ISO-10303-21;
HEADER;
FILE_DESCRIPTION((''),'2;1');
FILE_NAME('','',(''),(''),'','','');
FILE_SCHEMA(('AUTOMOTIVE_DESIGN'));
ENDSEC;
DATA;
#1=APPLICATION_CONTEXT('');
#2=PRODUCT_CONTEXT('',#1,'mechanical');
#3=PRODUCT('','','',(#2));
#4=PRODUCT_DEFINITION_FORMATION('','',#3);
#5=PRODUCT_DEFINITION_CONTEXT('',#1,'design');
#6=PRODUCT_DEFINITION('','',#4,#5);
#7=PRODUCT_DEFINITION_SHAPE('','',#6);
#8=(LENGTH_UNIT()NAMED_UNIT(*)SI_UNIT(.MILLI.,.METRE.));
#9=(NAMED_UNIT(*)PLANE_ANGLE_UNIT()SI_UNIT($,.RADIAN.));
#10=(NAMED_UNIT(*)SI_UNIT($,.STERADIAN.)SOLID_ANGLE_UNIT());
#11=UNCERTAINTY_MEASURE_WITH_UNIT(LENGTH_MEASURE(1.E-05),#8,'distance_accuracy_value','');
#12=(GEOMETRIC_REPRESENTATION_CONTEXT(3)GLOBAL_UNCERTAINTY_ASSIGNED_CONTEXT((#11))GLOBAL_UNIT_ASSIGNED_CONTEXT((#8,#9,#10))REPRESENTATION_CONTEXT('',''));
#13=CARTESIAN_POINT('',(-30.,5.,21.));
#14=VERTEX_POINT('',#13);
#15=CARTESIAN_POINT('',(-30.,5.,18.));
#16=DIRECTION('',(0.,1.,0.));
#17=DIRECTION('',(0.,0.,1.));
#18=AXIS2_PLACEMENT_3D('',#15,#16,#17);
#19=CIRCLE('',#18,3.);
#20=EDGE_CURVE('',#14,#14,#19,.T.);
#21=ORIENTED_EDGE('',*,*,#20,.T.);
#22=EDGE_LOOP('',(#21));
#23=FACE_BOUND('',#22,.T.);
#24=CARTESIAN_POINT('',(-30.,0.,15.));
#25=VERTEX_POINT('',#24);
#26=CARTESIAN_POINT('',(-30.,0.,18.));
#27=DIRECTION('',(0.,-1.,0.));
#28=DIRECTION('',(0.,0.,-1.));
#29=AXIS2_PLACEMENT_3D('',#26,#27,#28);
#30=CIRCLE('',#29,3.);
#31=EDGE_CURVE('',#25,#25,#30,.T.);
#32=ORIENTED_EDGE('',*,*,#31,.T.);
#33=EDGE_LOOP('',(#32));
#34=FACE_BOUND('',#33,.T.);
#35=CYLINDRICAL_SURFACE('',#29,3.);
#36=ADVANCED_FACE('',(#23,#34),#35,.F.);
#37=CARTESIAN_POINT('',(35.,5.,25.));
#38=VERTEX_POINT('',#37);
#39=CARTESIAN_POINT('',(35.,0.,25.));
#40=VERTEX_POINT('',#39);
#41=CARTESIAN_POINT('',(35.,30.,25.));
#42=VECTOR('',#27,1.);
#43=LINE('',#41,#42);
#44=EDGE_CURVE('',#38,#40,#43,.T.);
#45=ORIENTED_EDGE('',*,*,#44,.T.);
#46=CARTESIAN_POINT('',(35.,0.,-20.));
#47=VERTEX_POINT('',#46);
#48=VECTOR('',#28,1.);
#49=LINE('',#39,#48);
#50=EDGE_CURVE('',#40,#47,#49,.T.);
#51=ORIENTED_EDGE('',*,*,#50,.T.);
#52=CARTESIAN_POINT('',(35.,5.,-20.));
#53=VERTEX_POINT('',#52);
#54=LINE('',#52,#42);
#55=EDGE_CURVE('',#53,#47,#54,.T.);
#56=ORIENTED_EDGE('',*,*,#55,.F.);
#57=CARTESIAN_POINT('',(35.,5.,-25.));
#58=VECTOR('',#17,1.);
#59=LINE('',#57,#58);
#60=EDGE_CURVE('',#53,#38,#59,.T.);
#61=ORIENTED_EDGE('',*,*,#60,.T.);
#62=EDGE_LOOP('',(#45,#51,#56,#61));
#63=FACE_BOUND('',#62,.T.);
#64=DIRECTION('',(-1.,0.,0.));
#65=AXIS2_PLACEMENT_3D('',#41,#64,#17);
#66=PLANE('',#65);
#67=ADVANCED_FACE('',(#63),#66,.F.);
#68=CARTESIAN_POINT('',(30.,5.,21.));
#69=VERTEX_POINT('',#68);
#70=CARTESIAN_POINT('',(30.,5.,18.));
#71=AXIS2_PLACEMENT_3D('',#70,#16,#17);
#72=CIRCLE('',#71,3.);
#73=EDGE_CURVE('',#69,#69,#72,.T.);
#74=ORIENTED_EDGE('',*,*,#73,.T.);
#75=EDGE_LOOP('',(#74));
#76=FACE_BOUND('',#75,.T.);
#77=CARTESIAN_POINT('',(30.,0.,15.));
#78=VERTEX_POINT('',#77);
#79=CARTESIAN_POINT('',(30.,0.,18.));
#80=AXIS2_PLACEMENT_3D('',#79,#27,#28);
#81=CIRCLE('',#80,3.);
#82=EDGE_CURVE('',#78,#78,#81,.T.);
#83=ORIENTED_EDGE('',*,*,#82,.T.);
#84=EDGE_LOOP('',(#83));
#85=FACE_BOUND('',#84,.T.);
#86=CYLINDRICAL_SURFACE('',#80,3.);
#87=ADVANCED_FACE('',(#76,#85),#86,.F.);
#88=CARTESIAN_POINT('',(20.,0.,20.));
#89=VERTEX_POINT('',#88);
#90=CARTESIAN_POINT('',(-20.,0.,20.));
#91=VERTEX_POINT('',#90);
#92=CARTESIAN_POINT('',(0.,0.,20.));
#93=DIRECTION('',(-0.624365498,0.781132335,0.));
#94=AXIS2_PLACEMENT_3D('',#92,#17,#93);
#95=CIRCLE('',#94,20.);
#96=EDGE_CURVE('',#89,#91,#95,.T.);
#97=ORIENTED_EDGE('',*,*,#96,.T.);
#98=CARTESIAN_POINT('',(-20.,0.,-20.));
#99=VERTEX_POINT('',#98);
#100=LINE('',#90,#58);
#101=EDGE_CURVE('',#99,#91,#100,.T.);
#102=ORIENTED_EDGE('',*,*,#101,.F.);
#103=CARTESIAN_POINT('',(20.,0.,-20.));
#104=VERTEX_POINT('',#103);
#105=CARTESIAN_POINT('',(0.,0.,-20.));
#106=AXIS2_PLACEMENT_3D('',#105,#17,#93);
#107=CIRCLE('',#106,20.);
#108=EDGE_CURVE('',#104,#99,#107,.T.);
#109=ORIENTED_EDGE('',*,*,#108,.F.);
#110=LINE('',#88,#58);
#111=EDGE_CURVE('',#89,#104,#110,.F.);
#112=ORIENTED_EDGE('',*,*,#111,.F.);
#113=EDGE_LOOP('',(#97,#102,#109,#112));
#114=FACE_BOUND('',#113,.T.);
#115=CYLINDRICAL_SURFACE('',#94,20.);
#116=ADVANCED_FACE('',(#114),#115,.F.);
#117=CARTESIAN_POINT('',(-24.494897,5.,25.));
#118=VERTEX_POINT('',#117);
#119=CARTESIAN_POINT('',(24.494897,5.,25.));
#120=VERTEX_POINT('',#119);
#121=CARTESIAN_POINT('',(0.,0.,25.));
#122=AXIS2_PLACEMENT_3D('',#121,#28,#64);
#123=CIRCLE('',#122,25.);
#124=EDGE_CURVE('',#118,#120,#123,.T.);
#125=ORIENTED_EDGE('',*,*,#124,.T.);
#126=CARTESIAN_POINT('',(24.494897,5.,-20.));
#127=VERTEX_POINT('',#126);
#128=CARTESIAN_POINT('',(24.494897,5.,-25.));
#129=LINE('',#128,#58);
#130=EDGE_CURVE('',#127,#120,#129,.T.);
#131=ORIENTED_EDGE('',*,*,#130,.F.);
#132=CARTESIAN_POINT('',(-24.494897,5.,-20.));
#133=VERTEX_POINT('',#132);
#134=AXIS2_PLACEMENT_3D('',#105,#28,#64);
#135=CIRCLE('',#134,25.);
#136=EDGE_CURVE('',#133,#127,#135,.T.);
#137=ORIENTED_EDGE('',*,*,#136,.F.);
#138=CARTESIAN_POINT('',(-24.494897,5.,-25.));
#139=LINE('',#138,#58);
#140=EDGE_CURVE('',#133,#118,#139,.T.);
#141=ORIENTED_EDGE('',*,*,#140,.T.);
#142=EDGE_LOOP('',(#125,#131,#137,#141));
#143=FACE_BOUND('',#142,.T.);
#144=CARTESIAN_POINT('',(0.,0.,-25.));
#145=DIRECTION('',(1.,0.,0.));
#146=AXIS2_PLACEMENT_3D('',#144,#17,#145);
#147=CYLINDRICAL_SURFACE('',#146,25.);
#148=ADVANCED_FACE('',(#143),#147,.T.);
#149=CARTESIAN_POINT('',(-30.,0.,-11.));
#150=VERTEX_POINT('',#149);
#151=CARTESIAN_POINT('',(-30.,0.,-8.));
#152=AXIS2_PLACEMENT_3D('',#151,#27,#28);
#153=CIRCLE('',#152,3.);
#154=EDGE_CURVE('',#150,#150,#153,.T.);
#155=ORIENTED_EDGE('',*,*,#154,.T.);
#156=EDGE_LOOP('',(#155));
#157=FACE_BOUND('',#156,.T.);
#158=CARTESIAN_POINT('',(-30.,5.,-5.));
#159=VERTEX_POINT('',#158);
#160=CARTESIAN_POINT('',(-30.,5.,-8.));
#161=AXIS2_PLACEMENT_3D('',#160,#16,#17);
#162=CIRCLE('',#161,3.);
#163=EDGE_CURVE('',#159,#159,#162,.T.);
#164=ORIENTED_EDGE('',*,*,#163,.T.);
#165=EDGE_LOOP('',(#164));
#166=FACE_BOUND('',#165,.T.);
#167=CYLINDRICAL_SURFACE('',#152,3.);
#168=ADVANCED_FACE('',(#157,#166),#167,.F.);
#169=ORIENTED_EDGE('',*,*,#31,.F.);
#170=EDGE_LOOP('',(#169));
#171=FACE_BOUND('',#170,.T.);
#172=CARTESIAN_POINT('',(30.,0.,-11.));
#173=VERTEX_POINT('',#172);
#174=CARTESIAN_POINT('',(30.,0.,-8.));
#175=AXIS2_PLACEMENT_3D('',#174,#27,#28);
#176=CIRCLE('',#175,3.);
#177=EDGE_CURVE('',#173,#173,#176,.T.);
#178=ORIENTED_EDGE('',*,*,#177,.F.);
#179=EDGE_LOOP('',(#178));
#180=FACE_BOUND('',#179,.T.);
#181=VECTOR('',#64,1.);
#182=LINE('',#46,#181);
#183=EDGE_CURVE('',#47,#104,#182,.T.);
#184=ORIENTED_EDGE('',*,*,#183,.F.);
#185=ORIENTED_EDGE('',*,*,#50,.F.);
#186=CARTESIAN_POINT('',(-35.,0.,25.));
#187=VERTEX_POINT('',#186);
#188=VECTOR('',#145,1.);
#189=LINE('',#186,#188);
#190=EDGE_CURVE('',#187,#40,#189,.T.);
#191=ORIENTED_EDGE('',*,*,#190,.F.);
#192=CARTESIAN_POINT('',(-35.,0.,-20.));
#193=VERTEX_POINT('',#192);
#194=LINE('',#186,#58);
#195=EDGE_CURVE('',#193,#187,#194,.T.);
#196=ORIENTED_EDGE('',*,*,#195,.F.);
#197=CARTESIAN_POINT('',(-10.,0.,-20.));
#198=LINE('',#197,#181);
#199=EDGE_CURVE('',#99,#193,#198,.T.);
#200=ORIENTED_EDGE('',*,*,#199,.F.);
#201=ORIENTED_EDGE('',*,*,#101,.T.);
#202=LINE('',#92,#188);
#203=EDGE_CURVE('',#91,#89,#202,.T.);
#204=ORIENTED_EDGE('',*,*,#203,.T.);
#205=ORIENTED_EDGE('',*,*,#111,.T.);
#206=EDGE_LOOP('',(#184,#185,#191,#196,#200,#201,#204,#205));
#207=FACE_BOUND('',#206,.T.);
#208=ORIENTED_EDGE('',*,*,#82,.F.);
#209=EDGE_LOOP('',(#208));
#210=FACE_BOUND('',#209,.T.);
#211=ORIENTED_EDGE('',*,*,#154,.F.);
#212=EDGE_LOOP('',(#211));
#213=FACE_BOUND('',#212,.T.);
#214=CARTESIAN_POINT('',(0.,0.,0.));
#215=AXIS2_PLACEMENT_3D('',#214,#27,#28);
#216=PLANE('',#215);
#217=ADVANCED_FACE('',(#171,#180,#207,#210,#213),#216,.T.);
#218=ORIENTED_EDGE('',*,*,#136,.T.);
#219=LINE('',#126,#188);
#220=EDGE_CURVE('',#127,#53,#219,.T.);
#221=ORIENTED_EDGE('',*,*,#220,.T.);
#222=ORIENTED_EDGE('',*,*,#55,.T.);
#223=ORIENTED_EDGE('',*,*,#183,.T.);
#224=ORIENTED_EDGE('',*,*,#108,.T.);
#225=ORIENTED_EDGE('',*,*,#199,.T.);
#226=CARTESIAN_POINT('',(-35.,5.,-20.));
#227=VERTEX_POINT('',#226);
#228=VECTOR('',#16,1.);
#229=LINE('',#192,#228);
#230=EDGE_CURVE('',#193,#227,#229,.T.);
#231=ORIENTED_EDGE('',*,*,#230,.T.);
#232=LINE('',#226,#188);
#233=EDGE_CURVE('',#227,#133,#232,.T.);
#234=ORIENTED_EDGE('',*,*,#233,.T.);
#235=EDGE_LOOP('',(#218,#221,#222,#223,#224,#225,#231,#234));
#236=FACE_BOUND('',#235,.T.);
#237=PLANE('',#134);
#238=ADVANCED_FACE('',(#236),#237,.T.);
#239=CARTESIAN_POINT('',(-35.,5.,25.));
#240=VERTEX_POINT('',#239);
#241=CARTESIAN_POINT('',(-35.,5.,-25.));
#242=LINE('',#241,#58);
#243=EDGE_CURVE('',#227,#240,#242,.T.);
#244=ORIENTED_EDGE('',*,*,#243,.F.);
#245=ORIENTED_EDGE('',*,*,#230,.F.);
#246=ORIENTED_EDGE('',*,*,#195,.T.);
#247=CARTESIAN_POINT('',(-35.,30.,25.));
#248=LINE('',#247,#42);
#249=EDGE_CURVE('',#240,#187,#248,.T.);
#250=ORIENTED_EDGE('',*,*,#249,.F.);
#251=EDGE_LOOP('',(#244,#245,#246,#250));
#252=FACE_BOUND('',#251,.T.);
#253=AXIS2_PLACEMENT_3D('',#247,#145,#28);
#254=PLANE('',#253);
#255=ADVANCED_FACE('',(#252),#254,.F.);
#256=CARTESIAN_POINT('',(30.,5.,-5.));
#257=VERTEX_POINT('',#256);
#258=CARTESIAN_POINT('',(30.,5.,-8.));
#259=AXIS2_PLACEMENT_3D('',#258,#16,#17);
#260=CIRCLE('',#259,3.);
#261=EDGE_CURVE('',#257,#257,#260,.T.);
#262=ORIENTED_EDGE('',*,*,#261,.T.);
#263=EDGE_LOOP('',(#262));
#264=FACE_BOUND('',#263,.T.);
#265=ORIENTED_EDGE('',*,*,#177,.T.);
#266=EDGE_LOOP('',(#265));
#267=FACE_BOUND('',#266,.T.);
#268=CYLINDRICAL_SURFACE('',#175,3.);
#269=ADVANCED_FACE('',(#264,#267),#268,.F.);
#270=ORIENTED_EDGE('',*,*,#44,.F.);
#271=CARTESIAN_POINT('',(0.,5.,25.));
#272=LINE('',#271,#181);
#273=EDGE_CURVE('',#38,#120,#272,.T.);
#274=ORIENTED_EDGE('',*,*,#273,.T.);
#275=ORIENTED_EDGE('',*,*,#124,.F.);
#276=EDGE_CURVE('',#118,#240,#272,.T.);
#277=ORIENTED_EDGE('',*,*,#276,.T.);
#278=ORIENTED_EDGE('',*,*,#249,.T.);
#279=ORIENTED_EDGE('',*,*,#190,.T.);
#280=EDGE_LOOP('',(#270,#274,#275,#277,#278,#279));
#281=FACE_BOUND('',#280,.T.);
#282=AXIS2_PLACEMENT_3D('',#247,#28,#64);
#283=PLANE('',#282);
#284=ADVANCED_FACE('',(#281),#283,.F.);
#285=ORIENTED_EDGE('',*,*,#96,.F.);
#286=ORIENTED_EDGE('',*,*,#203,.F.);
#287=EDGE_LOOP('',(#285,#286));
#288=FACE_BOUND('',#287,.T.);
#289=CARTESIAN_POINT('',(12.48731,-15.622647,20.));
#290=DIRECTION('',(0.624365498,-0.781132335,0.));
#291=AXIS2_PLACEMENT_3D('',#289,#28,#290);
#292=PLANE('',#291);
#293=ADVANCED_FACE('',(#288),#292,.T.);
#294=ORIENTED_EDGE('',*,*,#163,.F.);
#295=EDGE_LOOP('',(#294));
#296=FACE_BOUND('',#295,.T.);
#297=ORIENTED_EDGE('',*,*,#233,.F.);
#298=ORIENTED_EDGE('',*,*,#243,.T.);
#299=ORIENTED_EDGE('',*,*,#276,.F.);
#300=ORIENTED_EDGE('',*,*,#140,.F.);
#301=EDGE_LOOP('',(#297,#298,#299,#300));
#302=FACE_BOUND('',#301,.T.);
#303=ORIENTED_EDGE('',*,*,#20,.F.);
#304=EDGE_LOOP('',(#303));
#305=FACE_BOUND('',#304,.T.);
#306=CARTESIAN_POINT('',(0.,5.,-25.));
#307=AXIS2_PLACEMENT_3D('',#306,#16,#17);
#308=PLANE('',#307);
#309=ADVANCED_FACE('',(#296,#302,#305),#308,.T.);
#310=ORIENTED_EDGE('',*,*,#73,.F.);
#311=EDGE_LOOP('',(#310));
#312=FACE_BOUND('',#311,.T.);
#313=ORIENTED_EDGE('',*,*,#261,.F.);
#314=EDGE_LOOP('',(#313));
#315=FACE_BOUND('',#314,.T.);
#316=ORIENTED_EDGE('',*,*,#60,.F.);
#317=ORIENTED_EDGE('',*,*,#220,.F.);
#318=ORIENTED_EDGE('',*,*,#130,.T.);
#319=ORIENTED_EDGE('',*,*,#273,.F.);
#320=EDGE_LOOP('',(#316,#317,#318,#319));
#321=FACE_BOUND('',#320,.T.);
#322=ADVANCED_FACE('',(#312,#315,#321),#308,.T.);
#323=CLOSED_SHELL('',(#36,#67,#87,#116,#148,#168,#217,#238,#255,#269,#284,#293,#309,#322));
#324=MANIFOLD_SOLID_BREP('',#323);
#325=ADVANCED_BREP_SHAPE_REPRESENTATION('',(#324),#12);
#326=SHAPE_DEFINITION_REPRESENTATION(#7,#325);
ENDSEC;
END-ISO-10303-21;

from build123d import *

# Parameters (mm, degrees)
SKETCH1_W                 = 70
SKETCH1_H                 = 50
BOSS_EXTRUDE1_DEPTH       = 30
CAVITY1_START             = -20
CAVITY1_DEPTH             = 40
CAVITY1_START_2           = -25
CAVITY1_2_DEPTH           = 5
CUT_EXTRUDE1_DEPTH        = 65.420493634
CUT_EXTRUDE1_DEPTH_BACK   = 65.420493634
F_6_0MM_DOWEL_HOLE1_D     = 6
F_6_0MM_DOWEL_HOLE1_DEPTH = 10
F_6_0MM_DOWEL_HOLE1_TIP   = 1.802581857
CUT_EXTRUDE3_DEPTH        = 5


# Read off the part's stored shape, not the designer's step: Cavity1
with BuildPart() as part:
    # Sketch1 → Boss-Extrude1 (new body)
    with BuildSketch(Plane(origin=(0, 0, 0), x_dir=(1, 0, 0), z_dir=(0, 1, 0))):
        Rectangle(SKETCH1_W, SKETCH1_H)
    extrude(amount=BOSS_EXTRUDE1_DEPTH)

    # Cavity1 outline → Cavity1 (cut)
    with BuildSketch(Plane.XY.offset(CAVITY1_START)):
        with BuildLine():
            ThreePointArc((20, 0), (0, 20), (-20, 0))
            Line((-20, 0), (20, 0))
        make_face()
    extrude(amount=CAVITY1_DEPTH, mode=Mode.SUBTRACT)

    # Cavity1 2 outline → Cavity1 2 (cut)
    with BuildSketch(Plane.XY.offset(CAVITY1_START_2)):
        with BuildLine():
            Line((-10, 0), (10, 0))
            ThreePointArc((10, 0), (0, 10), (-10, 0))
        make_face()
    extrude(amount=CAVITY1_2_DEPTH, mode=Mode.SUBTRACT)

    # Sketch2 → Cut-Extrude1 (cut, two sides: drawn at the far end of the back side and taken through both)
    with BuildSketch(Plane(origin=(0, 0, 20), x_dir=(-1, 0, 0), z_dir=(0, 0, -1)).offset(-CUT_EXTRUDE1_DEPTH_BACK)):
        with BuildLine():
            Line((-35, 30), (-35, 5))
            Line((-35, 5), (-24.494897428, 5))
            ThreePointArc((-24.494897428, 5), (0, 25), (24.494897428, 5))
            Line((24.494897428, 5), (35, 5))
            Line((35, 5), (35, 30))
            Line((35, 30), (-35, 30))
        make_face()
    extrude(amount=CUT_EXTRUDE1_DEPTH + CUT_EXTRUDE1_DEPTH_BACK, mode=Mode.SUBTRACT)

    # Ø6.0mm Dowel Hole1
    with Locations(Plane(origin=(0, 0, 0), x_dir=(-1, 0, 0), z_dir=(0, -1, 0))):
        with Locations((-30, 8), (-30, -18), (30, 8), (30, -18)):
            Hole(F_6_0MM_DOWEL_HOLE1_D / 2, depth=F_6_0MM_DOWEL_HOLE1_DEPTH)
            with Locations((0, 0, -(F_6_0MM_DOWEL_HOLE1_DEPTH + F_6_0MM_DOWEL_HOLE1_TIP / 2))):  # 118° drill point
                Cone(0, F_6_0MM_DOWEL_HOLE1_D / 2, F_6_0MM_DOWEL_HOLE1_TIP, mode=Mode.SUBTRACT)

    # Sketch6 → Cut-Extrude3 (cut)
    with BuildSketch(Plane(origin=(0, 0, -25), x_dir=(-1, 0, 0), z_dir=(0, 0, -1))):
        with BuildLine():
            Line((35, 5), (24.494897428, 5))
            ThreePointArc((24.494897428, 5), (0, 25), (-24.494897428, 5))
            Line((-24.494897428, 5), (-35, 5))
            Line((-35, 5), (-35, 0))
            Line((-35, 0), (-10, 0))
            ThreePointArc((-10, 0), (0, 10), (10, 0))
            Line((10, 0), (35, 0))
            Line((35, 0), (35, 5))
        make_face()
    extrude(amount=-CUT_EXTRUDE3_DEPTH, mode=Mode.SUBTRACT)


solid = part.part
